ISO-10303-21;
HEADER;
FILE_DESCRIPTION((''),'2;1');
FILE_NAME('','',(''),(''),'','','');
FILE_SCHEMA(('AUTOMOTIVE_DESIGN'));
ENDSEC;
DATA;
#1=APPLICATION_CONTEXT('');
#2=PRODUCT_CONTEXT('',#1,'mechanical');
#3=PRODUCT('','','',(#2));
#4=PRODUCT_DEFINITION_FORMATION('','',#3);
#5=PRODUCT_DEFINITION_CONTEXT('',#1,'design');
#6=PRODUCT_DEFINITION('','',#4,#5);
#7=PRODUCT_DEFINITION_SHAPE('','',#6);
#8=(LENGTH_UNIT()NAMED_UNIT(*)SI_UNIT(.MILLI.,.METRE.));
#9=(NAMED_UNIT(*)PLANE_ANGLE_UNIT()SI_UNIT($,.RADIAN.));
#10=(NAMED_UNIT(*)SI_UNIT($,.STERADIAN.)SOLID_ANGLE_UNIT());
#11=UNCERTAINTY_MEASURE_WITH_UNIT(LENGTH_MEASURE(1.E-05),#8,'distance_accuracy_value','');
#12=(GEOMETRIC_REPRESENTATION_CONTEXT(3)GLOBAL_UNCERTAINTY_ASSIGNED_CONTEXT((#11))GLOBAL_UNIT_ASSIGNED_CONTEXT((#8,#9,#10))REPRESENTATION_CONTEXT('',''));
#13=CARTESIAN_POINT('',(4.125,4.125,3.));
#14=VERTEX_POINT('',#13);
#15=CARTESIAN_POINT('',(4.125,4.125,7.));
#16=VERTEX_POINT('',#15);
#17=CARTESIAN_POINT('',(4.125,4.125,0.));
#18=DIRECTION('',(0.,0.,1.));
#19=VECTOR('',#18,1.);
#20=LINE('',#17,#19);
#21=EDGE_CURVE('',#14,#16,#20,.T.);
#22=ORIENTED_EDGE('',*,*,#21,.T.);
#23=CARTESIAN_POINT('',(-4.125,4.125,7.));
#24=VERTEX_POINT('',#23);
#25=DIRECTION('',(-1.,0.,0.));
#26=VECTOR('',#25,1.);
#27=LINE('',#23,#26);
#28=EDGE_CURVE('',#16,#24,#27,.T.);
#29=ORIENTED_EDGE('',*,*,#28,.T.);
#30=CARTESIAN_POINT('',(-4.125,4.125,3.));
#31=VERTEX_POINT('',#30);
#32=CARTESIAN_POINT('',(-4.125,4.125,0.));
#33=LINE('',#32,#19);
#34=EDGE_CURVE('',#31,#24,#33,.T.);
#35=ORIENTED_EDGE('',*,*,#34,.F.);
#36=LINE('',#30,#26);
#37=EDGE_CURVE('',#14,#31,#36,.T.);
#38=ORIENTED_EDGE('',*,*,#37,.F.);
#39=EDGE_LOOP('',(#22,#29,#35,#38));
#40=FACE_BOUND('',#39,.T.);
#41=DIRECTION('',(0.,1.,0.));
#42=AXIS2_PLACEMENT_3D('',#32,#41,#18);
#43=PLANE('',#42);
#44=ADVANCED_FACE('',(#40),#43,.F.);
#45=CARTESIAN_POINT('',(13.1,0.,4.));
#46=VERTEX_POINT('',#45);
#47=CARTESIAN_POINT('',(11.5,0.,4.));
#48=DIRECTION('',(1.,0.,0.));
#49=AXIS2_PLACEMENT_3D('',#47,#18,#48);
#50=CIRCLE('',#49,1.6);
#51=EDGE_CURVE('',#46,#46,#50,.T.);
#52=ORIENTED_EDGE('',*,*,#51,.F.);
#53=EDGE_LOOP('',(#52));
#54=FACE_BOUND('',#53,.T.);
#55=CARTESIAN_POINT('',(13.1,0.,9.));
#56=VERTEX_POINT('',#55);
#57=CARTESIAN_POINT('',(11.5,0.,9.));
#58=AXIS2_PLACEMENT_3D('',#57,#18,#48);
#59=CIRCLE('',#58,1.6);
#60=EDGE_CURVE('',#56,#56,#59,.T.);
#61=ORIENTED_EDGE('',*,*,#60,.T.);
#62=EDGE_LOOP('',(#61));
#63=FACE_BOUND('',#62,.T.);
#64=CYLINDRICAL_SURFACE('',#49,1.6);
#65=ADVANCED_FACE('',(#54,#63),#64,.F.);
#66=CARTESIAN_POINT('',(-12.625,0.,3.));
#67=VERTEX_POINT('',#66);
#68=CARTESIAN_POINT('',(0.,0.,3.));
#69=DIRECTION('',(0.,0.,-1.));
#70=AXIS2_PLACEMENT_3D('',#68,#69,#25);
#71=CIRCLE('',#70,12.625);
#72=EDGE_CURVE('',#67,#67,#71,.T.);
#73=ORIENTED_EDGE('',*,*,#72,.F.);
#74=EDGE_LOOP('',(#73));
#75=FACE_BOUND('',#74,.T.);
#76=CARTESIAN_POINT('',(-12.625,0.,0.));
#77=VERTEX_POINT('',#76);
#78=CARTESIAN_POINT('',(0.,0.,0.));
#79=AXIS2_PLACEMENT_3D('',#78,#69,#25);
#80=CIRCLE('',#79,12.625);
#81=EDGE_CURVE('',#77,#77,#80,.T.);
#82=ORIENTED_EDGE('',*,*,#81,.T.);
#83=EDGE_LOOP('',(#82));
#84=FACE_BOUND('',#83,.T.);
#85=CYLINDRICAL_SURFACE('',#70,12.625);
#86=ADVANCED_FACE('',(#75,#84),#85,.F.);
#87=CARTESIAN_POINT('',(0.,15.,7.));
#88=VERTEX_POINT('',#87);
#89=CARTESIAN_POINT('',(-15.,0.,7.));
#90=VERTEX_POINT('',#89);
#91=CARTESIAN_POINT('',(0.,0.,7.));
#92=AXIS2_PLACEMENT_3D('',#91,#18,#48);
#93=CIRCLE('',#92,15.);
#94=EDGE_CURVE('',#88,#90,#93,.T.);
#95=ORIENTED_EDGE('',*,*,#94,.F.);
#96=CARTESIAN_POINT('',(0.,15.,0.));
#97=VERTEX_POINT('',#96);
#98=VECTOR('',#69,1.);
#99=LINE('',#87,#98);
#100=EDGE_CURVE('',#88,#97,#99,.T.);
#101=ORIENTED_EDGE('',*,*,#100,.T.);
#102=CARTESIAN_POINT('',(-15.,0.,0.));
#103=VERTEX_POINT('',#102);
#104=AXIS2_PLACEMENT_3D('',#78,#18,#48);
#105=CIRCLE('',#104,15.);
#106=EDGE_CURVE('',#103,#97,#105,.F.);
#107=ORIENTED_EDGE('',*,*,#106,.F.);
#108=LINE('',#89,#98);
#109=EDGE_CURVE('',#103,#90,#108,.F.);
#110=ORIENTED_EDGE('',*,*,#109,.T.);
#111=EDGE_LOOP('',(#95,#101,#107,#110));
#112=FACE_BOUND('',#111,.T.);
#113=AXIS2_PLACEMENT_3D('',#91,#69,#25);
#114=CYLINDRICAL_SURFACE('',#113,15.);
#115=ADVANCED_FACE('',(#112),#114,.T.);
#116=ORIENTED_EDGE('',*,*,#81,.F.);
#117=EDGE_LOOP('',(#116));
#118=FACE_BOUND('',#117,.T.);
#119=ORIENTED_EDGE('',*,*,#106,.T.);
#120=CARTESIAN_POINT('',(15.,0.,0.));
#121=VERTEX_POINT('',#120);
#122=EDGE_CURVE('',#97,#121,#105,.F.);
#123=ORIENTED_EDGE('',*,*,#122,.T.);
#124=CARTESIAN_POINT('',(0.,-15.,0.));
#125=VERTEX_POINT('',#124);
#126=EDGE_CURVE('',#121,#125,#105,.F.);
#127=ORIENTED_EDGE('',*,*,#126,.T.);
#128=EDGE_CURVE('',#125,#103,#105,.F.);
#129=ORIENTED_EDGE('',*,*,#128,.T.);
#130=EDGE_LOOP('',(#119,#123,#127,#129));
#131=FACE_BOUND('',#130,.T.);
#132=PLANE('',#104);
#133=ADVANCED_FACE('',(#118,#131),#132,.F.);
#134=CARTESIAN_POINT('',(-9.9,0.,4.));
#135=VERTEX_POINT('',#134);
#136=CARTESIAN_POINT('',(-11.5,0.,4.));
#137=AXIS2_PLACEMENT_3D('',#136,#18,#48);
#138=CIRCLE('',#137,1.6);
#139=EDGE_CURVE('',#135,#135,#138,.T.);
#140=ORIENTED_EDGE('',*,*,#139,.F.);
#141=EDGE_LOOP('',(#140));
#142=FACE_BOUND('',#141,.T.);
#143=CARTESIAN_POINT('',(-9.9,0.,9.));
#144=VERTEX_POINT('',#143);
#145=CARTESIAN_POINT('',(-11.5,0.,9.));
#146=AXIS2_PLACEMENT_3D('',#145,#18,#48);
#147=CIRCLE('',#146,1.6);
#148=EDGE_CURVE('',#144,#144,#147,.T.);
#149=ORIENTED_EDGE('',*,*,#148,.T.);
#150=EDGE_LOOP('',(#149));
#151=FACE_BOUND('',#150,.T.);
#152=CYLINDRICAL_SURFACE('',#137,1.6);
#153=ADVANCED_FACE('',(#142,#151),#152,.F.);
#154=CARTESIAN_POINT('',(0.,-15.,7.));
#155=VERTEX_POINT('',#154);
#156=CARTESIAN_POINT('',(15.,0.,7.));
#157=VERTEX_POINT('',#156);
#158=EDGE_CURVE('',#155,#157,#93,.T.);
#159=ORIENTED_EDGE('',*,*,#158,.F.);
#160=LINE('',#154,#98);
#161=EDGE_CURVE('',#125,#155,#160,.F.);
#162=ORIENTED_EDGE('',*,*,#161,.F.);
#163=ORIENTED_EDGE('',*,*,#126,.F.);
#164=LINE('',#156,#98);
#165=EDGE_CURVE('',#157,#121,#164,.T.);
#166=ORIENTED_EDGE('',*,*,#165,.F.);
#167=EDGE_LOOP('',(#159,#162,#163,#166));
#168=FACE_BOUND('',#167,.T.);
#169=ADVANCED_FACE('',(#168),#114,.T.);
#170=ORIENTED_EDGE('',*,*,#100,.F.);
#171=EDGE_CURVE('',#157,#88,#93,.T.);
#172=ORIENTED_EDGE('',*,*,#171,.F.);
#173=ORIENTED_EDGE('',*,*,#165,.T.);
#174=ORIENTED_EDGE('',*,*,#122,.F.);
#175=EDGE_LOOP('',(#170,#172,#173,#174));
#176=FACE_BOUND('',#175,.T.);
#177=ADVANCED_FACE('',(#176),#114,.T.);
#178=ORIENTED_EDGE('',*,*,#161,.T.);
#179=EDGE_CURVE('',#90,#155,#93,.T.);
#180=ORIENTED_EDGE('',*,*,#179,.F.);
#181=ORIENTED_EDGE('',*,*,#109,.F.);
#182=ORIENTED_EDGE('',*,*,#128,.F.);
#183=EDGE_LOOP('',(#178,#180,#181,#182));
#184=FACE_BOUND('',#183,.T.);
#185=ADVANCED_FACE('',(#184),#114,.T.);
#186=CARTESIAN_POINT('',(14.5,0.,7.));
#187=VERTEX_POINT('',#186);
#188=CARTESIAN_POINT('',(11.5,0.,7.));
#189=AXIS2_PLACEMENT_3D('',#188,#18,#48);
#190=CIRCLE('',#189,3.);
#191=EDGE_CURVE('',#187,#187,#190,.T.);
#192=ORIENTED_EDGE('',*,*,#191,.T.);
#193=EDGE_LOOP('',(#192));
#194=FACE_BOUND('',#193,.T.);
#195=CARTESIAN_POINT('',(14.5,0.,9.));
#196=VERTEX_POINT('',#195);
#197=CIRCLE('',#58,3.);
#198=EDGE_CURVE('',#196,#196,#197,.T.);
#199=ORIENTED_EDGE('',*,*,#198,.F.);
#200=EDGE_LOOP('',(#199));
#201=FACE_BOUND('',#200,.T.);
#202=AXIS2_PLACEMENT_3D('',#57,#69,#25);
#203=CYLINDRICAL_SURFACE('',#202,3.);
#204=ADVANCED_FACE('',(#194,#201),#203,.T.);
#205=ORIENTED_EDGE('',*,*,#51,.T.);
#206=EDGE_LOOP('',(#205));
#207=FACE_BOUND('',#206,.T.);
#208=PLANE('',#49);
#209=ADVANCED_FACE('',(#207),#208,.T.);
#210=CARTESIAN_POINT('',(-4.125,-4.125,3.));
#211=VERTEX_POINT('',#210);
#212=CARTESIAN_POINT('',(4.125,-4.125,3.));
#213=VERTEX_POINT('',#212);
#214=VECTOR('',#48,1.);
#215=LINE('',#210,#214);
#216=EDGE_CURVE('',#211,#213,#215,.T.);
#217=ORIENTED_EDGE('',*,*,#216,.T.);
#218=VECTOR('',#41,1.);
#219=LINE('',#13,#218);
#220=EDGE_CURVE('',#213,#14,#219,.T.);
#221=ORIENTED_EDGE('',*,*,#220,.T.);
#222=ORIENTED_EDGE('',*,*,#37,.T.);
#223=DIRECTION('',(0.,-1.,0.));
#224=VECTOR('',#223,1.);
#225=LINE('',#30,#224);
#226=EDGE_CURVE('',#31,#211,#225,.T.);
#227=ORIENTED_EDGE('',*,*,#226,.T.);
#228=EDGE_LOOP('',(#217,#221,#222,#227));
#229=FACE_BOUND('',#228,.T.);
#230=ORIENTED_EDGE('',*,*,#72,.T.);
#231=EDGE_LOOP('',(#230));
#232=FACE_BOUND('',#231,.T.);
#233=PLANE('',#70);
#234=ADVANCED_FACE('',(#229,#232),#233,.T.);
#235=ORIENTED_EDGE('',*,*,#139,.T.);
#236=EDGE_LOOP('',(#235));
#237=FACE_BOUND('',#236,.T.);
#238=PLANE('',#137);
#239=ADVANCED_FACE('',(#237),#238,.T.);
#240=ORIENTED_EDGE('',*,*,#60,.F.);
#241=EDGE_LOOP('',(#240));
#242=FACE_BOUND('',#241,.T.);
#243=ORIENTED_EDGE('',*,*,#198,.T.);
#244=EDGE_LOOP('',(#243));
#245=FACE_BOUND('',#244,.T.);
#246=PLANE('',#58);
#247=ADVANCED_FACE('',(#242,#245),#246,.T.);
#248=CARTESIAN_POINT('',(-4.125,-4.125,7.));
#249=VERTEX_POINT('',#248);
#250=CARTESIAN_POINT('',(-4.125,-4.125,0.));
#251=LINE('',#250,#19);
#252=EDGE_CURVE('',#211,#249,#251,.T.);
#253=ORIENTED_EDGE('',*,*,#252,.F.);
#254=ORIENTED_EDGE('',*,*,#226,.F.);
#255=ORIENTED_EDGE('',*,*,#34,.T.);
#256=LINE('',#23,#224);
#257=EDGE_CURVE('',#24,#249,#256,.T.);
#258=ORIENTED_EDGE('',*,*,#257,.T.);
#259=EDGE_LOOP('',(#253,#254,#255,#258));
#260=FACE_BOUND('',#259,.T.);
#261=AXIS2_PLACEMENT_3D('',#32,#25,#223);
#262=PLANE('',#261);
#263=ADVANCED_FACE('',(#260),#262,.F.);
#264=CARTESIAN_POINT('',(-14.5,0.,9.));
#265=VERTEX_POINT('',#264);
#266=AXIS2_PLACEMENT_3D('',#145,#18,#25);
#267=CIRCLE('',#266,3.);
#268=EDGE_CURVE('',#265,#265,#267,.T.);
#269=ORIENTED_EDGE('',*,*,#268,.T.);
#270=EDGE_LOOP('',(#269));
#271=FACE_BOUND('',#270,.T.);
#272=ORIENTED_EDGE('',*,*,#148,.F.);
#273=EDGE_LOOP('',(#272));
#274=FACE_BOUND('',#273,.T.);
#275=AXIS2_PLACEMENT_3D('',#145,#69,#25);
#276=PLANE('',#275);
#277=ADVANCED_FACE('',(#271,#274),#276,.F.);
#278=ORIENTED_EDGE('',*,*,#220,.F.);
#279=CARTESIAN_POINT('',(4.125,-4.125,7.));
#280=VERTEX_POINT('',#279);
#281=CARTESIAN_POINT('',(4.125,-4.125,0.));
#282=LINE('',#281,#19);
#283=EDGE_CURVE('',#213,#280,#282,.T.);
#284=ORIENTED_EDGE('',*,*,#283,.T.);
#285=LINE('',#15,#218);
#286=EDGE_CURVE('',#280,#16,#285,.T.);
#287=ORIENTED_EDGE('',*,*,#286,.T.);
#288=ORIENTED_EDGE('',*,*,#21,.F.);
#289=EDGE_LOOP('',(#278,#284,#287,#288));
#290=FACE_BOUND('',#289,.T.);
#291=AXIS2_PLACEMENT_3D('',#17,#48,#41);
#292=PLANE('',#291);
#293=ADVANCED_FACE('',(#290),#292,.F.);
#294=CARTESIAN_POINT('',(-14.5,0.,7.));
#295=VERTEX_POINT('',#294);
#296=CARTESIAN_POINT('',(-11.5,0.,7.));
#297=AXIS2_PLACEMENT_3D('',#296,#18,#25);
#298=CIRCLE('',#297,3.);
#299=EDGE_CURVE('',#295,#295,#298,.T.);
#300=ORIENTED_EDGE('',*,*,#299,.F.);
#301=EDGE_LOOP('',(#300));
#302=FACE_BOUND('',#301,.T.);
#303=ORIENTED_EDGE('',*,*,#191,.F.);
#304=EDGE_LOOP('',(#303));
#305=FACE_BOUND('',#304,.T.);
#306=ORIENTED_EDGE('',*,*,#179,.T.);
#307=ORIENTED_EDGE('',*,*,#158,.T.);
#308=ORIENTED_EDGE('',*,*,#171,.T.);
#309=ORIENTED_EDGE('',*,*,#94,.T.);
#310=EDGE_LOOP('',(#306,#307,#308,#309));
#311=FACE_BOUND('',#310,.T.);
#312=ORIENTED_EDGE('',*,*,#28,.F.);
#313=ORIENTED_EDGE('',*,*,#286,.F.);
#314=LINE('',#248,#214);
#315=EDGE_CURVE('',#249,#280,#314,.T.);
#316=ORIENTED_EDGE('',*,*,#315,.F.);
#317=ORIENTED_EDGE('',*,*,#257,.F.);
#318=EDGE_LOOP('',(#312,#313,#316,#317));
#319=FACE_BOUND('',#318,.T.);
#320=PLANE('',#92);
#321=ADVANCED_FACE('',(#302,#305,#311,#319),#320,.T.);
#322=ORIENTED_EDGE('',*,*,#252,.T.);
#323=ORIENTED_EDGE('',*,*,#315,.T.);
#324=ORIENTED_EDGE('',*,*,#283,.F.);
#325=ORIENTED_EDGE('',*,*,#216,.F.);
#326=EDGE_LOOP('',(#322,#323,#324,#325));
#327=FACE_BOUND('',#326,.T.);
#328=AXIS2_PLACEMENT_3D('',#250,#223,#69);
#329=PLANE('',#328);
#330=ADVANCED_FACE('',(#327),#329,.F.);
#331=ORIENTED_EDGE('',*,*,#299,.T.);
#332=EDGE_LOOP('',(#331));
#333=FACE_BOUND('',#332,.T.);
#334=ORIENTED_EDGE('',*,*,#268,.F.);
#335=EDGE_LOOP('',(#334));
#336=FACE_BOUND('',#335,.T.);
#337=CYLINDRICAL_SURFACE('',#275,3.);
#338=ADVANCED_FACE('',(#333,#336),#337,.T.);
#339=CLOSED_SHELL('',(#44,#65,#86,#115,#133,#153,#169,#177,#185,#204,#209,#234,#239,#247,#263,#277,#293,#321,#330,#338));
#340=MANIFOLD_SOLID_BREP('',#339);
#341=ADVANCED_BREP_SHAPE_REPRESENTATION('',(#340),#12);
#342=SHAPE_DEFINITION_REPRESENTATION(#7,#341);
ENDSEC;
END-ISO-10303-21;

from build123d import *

# Parameters (mm, degrees)
SKETCH_1_W          = 30
SKETCH_1_H          = 30
EXTRUDE_1_DEPTH     = 7
SKETCH_2_W          = 8.25
SKETCH_2_H          = 8.25
CUT_EXTRUDE_1_DEPTH = 23.338307904
SKETCH_3_R          = 3
EXTRUDE_2_DEPTH     = 2
SKETCH_4_R          = 1.6
CUT_EXTRUDE_2_DEPTH = 5
SKETCH_5_R          = 12.625
CUT_EXTRUDE_3_DEPTH = 3
FILLET_1_R          = 15


with BuildPart() as part:
    # Эскиз1 → Бобышка-Вытянуть1 (new body)
    with BuildSketch(Plane.XY):
        Rectangle(SKETCH_1_W, SKETCH_1_H)
    extrude(amount=EXTRUDE_1_DEPTH)

    # Эскиз2 → Вырез-Вытянуть1 (cut, through all)
    with BuildSketch(Plane.XY.offset(7)):
        Rectangle(SKETCH_2_W, SKETCH_2_H)
    extrude(amount=-CUT_EXTRUDE_1_DEPTH, mode=Mode.SUBTRACT)

    # Эскиз3 → Бобышка-Вытянуть2 (add)
    with BuildSketch(Plane.XY.offset(7)):
        with Locations((11.5, 0)):
            Circle(SKETCH_3_R)
        with Locations(Location((-11.5, 0, 0), (0, 0, 180))):
            Circle(SKETCH_3_R)
    extrude(amount=EXTRUDE_2_DEPTH)

    # Эскиз4 → Вырез-Вытянуть2 (cut)
    with BuildSketch(Plane.XY.offset(9)):
        with Locations((-11.5, 0)):
            Circle(SKETCH_4_R)
        with Locations((11.5, 0)):
            Circle(SKETCH_4_R)
    extrude(amount=-CUT_EXTRUDE_2_DEPTH, mode=Mode.SUBTRACT)

    # Эскиз5 → Вырез-Вытянуть3 (cut)
    with BuildSketch(Plane(origin=(0, 0, 0), x_dir=(-1, 0, 0), z_dir=(0, 0, -1))):
        Circle(SKETCH_5_R)
    extrude(amount=-CUT_EXTRUDE_3_DEPTH, mode=Mode.SUBTRACT)

    # Скругление1
    fillet_1_edges = [part.edges().sort_by_distance(p)[0] for p in [
        (-15, 15, 3.5),
        (15, 15, 3.5),
        (15, -15, 3.5),
        (-15, -15, 3.5),
    ]]
    fillet(fillet_1_edges, radius=FILLET_1_R - 0.0001)  # a hair under: the kernel refuses the full size


solid = part.part
